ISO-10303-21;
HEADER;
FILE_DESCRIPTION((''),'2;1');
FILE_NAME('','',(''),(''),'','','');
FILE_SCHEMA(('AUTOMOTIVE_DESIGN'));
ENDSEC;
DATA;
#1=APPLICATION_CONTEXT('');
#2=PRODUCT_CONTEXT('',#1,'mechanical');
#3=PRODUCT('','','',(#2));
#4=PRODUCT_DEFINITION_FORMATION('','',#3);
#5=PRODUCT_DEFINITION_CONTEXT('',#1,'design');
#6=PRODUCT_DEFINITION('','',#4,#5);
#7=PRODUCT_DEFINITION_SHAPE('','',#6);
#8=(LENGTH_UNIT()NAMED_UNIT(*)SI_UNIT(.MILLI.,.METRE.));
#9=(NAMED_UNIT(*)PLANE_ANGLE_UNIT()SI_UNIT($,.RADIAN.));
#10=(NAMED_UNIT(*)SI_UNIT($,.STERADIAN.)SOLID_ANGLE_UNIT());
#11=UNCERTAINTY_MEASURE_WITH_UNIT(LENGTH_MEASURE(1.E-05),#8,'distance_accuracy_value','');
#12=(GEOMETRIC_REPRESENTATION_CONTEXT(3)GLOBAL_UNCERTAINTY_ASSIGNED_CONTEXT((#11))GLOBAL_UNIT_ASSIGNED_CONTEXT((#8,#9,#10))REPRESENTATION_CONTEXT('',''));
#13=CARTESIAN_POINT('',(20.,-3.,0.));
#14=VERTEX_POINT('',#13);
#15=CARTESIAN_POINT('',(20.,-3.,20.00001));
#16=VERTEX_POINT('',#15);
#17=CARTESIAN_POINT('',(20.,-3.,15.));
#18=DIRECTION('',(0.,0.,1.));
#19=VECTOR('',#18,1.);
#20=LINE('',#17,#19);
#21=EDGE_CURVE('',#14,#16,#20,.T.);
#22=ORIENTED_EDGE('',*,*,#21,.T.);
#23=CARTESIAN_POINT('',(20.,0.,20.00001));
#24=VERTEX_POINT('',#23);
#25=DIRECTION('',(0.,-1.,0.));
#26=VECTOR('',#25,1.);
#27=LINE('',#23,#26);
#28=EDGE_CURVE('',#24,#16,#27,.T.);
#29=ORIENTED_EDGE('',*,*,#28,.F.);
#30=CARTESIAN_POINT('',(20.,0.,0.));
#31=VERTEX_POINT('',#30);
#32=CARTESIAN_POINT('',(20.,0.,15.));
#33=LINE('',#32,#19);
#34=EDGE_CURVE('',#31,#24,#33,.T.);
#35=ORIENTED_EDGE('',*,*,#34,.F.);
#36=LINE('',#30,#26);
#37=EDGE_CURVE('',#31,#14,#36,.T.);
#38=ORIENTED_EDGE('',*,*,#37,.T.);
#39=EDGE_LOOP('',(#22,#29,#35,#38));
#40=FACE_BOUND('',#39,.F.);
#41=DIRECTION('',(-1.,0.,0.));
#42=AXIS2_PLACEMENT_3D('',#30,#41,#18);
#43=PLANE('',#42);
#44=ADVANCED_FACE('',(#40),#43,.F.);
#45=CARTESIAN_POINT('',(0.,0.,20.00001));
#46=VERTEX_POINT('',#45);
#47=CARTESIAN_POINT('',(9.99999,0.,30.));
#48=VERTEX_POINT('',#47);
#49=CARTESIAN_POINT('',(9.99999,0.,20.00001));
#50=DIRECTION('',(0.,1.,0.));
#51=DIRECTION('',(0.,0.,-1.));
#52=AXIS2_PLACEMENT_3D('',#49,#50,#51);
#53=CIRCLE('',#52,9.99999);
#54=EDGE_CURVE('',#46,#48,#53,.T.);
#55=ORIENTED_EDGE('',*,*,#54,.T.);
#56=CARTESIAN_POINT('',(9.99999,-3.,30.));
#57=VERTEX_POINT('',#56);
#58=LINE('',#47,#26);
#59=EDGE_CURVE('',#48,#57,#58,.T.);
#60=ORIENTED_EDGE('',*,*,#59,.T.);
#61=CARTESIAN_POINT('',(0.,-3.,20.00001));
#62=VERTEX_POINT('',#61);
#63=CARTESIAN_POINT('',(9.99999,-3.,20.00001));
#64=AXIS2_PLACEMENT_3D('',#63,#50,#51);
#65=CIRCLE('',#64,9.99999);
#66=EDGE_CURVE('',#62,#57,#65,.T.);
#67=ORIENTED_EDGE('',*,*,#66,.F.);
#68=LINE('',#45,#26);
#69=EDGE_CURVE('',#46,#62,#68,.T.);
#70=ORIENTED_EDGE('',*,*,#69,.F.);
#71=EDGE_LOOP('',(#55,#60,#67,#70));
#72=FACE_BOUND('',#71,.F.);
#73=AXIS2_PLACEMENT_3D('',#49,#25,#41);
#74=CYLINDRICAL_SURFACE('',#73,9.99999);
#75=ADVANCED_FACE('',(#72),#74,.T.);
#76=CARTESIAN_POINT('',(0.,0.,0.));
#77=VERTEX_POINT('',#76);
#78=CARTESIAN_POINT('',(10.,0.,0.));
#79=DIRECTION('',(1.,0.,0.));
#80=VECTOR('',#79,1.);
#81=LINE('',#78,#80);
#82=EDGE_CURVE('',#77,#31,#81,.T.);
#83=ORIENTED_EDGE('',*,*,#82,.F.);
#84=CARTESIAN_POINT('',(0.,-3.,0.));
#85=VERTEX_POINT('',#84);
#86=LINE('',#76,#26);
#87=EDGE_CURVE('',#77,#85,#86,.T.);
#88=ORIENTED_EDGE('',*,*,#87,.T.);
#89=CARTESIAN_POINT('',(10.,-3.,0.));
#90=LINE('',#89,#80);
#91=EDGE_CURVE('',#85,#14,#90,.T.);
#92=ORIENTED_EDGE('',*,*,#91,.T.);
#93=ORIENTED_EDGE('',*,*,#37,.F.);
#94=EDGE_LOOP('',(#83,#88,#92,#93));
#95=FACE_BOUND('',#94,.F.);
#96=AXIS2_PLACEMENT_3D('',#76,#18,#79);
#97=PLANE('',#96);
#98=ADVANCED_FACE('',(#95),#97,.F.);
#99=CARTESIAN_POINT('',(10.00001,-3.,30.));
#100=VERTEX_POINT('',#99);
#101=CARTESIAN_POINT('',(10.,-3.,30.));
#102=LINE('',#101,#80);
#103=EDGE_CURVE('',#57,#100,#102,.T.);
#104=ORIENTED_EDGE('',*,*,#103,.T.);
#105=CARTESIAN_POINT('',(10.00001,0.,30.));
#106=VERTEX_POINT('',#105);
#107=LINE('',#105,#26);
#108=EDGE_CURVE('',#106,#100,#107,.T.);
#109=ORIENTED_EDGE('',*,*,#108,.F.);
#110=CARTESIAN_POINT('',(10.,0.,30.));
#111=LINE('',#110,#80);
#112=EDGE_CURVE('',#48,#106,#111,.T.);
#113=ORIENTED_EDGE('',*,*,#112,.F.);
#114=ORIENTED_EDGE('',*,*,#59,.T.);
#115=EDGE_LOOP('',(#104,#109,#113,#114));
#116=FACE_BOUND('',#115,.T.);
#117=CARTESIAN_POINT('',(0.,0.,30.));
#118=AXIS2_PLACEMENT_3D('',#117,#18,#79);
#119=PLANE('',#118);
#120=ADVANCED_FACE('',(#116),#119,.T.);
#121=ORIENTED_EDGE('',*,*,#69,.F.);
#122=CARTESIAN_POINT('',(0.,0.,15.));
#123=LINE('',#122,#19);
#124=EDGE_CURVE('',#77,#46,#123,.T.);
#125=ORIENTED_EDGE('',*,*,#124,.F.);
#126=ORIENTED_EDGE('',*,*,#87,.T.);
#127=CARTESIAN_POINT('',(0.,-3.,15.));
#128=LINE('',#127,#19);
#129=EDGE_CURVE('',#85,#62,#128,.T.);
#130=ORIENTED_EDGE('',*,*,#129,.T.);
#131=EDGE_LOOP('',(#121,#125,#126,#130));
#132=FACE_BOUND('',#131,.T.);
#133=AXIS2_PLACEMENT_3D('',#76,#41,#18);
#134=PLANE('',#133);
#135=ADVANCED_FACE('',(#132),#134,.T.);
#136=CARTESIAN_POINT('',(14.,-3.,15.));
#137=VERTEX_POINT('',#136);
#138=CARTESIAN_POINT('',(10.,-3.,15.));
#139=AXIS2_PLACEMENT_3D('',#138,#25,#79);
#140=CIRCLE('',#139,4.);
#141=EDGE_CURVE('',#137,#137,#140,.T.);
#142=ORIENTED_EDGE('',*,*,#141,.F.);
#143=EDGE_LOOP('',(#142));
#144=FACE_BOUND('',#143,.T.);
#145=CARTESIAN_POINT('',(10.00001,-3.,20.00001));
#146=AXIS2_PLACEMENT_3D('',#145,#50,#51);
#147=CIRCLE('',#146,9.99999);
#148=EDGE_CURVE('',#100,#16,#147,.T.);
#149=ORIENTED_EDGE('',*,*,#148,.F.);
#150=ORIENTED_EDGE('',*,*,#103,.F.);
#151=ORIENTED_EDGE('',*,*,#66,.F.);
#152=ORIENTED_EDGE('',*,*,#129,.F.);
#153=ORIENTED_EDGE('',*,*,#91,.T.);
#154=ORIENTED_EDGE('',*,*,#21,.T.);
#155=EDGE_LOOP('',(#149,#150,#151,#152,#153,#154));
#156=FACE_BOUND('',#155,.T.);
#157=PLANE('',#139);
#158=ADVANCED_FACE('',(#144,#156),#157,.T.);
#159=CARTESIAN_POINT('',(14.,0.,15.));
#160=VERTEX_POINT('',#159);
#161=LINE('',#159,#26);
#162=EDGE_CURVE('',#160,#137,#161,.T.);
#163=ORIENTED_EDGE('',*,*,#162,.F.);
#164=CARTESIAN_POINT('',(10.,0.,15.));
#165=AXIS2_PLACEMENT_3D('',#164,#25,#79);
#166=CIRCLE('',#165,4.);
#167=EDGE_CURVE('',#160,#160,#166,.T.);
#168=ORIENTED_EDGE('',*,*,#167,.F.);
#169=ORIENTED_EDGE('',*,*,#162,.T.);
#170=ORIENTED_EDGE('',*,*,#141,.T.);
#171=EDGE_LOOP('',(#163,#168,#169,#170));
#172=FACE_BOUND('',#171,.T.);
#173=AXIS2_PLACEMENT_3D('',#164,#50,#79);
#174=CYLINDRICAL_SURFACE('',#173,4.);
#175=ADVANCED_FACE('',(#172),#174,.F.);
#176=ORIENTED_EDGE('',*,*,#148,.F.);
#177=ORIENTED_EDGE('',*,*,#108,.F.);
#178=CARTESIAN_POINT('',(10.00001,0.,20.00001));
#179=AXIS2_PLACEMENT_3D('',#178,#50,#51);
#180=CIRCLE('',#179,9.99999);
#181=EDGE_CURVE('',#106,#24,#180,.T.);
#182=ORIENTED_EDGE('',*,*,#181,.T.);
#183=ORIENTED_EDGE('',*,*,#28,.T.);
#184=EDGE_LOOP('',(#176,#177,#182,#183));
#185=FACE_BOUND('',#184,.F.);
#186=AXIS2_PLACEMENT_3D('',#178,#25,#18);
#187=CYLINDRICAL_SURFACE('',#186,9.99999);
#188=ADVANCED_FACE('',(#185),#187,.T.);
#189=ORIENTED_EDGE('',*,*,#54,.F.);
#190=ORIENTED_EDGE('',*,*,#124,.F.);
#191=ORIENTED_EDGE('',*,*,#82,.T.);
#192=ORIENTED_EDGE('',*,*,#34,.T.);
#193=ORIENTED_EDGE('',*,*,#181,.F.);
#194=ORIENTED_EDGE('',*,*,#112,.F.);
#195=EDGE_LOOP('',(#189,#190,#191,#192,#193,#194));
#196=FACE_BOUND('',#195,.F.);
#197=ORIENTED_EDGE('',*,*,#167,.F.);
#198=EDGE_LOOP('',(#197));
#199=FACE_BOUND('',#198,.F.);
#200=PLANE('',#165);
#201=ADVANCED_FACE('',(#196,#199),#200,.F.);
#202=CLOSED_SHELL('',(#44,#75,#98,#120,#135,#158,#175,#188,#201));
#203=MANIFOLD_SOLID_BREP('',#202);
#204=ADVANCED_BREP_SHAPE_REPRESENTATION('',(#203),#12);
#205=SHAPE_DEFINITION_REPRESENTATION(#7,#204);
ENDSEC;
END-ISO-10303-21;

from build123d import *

# Parameters (mm, degrees)
F0_W     = 20
F0_H     = 30
F0_R     = 4
F1_DEPTH = 3
F2_R     = 9.99999


# Not quite as in the source:
# - a fillet or chamfer is up to 0.001 mm smaller than in the source, because OpenCascade refuses the exact size


with BuildPart() as f1:
    # F0 (on Front) → F1 (new body)
    with BuildSketch(Plane.XZ):
        with Locations((10, 15)):
            Rectangle(F0_W, F0_H)
        with Locations((10, 15)):
            Circle(F0_R, mode=Mode.SUBTRACT)
    extrude(amount=F1_DEPTH)

    # F2 (radius 10 in the source; OpenCascade refuses exactly that, so slightly less here)
    f2_edges = [f1.edges().sort_by_distance(p)[0] for p in [
        (0, -1.5, 30),
        (20, -1.5, 30),
    ]]
    fillet(f2_edges, radius=F2_R)


solid = f1.part
